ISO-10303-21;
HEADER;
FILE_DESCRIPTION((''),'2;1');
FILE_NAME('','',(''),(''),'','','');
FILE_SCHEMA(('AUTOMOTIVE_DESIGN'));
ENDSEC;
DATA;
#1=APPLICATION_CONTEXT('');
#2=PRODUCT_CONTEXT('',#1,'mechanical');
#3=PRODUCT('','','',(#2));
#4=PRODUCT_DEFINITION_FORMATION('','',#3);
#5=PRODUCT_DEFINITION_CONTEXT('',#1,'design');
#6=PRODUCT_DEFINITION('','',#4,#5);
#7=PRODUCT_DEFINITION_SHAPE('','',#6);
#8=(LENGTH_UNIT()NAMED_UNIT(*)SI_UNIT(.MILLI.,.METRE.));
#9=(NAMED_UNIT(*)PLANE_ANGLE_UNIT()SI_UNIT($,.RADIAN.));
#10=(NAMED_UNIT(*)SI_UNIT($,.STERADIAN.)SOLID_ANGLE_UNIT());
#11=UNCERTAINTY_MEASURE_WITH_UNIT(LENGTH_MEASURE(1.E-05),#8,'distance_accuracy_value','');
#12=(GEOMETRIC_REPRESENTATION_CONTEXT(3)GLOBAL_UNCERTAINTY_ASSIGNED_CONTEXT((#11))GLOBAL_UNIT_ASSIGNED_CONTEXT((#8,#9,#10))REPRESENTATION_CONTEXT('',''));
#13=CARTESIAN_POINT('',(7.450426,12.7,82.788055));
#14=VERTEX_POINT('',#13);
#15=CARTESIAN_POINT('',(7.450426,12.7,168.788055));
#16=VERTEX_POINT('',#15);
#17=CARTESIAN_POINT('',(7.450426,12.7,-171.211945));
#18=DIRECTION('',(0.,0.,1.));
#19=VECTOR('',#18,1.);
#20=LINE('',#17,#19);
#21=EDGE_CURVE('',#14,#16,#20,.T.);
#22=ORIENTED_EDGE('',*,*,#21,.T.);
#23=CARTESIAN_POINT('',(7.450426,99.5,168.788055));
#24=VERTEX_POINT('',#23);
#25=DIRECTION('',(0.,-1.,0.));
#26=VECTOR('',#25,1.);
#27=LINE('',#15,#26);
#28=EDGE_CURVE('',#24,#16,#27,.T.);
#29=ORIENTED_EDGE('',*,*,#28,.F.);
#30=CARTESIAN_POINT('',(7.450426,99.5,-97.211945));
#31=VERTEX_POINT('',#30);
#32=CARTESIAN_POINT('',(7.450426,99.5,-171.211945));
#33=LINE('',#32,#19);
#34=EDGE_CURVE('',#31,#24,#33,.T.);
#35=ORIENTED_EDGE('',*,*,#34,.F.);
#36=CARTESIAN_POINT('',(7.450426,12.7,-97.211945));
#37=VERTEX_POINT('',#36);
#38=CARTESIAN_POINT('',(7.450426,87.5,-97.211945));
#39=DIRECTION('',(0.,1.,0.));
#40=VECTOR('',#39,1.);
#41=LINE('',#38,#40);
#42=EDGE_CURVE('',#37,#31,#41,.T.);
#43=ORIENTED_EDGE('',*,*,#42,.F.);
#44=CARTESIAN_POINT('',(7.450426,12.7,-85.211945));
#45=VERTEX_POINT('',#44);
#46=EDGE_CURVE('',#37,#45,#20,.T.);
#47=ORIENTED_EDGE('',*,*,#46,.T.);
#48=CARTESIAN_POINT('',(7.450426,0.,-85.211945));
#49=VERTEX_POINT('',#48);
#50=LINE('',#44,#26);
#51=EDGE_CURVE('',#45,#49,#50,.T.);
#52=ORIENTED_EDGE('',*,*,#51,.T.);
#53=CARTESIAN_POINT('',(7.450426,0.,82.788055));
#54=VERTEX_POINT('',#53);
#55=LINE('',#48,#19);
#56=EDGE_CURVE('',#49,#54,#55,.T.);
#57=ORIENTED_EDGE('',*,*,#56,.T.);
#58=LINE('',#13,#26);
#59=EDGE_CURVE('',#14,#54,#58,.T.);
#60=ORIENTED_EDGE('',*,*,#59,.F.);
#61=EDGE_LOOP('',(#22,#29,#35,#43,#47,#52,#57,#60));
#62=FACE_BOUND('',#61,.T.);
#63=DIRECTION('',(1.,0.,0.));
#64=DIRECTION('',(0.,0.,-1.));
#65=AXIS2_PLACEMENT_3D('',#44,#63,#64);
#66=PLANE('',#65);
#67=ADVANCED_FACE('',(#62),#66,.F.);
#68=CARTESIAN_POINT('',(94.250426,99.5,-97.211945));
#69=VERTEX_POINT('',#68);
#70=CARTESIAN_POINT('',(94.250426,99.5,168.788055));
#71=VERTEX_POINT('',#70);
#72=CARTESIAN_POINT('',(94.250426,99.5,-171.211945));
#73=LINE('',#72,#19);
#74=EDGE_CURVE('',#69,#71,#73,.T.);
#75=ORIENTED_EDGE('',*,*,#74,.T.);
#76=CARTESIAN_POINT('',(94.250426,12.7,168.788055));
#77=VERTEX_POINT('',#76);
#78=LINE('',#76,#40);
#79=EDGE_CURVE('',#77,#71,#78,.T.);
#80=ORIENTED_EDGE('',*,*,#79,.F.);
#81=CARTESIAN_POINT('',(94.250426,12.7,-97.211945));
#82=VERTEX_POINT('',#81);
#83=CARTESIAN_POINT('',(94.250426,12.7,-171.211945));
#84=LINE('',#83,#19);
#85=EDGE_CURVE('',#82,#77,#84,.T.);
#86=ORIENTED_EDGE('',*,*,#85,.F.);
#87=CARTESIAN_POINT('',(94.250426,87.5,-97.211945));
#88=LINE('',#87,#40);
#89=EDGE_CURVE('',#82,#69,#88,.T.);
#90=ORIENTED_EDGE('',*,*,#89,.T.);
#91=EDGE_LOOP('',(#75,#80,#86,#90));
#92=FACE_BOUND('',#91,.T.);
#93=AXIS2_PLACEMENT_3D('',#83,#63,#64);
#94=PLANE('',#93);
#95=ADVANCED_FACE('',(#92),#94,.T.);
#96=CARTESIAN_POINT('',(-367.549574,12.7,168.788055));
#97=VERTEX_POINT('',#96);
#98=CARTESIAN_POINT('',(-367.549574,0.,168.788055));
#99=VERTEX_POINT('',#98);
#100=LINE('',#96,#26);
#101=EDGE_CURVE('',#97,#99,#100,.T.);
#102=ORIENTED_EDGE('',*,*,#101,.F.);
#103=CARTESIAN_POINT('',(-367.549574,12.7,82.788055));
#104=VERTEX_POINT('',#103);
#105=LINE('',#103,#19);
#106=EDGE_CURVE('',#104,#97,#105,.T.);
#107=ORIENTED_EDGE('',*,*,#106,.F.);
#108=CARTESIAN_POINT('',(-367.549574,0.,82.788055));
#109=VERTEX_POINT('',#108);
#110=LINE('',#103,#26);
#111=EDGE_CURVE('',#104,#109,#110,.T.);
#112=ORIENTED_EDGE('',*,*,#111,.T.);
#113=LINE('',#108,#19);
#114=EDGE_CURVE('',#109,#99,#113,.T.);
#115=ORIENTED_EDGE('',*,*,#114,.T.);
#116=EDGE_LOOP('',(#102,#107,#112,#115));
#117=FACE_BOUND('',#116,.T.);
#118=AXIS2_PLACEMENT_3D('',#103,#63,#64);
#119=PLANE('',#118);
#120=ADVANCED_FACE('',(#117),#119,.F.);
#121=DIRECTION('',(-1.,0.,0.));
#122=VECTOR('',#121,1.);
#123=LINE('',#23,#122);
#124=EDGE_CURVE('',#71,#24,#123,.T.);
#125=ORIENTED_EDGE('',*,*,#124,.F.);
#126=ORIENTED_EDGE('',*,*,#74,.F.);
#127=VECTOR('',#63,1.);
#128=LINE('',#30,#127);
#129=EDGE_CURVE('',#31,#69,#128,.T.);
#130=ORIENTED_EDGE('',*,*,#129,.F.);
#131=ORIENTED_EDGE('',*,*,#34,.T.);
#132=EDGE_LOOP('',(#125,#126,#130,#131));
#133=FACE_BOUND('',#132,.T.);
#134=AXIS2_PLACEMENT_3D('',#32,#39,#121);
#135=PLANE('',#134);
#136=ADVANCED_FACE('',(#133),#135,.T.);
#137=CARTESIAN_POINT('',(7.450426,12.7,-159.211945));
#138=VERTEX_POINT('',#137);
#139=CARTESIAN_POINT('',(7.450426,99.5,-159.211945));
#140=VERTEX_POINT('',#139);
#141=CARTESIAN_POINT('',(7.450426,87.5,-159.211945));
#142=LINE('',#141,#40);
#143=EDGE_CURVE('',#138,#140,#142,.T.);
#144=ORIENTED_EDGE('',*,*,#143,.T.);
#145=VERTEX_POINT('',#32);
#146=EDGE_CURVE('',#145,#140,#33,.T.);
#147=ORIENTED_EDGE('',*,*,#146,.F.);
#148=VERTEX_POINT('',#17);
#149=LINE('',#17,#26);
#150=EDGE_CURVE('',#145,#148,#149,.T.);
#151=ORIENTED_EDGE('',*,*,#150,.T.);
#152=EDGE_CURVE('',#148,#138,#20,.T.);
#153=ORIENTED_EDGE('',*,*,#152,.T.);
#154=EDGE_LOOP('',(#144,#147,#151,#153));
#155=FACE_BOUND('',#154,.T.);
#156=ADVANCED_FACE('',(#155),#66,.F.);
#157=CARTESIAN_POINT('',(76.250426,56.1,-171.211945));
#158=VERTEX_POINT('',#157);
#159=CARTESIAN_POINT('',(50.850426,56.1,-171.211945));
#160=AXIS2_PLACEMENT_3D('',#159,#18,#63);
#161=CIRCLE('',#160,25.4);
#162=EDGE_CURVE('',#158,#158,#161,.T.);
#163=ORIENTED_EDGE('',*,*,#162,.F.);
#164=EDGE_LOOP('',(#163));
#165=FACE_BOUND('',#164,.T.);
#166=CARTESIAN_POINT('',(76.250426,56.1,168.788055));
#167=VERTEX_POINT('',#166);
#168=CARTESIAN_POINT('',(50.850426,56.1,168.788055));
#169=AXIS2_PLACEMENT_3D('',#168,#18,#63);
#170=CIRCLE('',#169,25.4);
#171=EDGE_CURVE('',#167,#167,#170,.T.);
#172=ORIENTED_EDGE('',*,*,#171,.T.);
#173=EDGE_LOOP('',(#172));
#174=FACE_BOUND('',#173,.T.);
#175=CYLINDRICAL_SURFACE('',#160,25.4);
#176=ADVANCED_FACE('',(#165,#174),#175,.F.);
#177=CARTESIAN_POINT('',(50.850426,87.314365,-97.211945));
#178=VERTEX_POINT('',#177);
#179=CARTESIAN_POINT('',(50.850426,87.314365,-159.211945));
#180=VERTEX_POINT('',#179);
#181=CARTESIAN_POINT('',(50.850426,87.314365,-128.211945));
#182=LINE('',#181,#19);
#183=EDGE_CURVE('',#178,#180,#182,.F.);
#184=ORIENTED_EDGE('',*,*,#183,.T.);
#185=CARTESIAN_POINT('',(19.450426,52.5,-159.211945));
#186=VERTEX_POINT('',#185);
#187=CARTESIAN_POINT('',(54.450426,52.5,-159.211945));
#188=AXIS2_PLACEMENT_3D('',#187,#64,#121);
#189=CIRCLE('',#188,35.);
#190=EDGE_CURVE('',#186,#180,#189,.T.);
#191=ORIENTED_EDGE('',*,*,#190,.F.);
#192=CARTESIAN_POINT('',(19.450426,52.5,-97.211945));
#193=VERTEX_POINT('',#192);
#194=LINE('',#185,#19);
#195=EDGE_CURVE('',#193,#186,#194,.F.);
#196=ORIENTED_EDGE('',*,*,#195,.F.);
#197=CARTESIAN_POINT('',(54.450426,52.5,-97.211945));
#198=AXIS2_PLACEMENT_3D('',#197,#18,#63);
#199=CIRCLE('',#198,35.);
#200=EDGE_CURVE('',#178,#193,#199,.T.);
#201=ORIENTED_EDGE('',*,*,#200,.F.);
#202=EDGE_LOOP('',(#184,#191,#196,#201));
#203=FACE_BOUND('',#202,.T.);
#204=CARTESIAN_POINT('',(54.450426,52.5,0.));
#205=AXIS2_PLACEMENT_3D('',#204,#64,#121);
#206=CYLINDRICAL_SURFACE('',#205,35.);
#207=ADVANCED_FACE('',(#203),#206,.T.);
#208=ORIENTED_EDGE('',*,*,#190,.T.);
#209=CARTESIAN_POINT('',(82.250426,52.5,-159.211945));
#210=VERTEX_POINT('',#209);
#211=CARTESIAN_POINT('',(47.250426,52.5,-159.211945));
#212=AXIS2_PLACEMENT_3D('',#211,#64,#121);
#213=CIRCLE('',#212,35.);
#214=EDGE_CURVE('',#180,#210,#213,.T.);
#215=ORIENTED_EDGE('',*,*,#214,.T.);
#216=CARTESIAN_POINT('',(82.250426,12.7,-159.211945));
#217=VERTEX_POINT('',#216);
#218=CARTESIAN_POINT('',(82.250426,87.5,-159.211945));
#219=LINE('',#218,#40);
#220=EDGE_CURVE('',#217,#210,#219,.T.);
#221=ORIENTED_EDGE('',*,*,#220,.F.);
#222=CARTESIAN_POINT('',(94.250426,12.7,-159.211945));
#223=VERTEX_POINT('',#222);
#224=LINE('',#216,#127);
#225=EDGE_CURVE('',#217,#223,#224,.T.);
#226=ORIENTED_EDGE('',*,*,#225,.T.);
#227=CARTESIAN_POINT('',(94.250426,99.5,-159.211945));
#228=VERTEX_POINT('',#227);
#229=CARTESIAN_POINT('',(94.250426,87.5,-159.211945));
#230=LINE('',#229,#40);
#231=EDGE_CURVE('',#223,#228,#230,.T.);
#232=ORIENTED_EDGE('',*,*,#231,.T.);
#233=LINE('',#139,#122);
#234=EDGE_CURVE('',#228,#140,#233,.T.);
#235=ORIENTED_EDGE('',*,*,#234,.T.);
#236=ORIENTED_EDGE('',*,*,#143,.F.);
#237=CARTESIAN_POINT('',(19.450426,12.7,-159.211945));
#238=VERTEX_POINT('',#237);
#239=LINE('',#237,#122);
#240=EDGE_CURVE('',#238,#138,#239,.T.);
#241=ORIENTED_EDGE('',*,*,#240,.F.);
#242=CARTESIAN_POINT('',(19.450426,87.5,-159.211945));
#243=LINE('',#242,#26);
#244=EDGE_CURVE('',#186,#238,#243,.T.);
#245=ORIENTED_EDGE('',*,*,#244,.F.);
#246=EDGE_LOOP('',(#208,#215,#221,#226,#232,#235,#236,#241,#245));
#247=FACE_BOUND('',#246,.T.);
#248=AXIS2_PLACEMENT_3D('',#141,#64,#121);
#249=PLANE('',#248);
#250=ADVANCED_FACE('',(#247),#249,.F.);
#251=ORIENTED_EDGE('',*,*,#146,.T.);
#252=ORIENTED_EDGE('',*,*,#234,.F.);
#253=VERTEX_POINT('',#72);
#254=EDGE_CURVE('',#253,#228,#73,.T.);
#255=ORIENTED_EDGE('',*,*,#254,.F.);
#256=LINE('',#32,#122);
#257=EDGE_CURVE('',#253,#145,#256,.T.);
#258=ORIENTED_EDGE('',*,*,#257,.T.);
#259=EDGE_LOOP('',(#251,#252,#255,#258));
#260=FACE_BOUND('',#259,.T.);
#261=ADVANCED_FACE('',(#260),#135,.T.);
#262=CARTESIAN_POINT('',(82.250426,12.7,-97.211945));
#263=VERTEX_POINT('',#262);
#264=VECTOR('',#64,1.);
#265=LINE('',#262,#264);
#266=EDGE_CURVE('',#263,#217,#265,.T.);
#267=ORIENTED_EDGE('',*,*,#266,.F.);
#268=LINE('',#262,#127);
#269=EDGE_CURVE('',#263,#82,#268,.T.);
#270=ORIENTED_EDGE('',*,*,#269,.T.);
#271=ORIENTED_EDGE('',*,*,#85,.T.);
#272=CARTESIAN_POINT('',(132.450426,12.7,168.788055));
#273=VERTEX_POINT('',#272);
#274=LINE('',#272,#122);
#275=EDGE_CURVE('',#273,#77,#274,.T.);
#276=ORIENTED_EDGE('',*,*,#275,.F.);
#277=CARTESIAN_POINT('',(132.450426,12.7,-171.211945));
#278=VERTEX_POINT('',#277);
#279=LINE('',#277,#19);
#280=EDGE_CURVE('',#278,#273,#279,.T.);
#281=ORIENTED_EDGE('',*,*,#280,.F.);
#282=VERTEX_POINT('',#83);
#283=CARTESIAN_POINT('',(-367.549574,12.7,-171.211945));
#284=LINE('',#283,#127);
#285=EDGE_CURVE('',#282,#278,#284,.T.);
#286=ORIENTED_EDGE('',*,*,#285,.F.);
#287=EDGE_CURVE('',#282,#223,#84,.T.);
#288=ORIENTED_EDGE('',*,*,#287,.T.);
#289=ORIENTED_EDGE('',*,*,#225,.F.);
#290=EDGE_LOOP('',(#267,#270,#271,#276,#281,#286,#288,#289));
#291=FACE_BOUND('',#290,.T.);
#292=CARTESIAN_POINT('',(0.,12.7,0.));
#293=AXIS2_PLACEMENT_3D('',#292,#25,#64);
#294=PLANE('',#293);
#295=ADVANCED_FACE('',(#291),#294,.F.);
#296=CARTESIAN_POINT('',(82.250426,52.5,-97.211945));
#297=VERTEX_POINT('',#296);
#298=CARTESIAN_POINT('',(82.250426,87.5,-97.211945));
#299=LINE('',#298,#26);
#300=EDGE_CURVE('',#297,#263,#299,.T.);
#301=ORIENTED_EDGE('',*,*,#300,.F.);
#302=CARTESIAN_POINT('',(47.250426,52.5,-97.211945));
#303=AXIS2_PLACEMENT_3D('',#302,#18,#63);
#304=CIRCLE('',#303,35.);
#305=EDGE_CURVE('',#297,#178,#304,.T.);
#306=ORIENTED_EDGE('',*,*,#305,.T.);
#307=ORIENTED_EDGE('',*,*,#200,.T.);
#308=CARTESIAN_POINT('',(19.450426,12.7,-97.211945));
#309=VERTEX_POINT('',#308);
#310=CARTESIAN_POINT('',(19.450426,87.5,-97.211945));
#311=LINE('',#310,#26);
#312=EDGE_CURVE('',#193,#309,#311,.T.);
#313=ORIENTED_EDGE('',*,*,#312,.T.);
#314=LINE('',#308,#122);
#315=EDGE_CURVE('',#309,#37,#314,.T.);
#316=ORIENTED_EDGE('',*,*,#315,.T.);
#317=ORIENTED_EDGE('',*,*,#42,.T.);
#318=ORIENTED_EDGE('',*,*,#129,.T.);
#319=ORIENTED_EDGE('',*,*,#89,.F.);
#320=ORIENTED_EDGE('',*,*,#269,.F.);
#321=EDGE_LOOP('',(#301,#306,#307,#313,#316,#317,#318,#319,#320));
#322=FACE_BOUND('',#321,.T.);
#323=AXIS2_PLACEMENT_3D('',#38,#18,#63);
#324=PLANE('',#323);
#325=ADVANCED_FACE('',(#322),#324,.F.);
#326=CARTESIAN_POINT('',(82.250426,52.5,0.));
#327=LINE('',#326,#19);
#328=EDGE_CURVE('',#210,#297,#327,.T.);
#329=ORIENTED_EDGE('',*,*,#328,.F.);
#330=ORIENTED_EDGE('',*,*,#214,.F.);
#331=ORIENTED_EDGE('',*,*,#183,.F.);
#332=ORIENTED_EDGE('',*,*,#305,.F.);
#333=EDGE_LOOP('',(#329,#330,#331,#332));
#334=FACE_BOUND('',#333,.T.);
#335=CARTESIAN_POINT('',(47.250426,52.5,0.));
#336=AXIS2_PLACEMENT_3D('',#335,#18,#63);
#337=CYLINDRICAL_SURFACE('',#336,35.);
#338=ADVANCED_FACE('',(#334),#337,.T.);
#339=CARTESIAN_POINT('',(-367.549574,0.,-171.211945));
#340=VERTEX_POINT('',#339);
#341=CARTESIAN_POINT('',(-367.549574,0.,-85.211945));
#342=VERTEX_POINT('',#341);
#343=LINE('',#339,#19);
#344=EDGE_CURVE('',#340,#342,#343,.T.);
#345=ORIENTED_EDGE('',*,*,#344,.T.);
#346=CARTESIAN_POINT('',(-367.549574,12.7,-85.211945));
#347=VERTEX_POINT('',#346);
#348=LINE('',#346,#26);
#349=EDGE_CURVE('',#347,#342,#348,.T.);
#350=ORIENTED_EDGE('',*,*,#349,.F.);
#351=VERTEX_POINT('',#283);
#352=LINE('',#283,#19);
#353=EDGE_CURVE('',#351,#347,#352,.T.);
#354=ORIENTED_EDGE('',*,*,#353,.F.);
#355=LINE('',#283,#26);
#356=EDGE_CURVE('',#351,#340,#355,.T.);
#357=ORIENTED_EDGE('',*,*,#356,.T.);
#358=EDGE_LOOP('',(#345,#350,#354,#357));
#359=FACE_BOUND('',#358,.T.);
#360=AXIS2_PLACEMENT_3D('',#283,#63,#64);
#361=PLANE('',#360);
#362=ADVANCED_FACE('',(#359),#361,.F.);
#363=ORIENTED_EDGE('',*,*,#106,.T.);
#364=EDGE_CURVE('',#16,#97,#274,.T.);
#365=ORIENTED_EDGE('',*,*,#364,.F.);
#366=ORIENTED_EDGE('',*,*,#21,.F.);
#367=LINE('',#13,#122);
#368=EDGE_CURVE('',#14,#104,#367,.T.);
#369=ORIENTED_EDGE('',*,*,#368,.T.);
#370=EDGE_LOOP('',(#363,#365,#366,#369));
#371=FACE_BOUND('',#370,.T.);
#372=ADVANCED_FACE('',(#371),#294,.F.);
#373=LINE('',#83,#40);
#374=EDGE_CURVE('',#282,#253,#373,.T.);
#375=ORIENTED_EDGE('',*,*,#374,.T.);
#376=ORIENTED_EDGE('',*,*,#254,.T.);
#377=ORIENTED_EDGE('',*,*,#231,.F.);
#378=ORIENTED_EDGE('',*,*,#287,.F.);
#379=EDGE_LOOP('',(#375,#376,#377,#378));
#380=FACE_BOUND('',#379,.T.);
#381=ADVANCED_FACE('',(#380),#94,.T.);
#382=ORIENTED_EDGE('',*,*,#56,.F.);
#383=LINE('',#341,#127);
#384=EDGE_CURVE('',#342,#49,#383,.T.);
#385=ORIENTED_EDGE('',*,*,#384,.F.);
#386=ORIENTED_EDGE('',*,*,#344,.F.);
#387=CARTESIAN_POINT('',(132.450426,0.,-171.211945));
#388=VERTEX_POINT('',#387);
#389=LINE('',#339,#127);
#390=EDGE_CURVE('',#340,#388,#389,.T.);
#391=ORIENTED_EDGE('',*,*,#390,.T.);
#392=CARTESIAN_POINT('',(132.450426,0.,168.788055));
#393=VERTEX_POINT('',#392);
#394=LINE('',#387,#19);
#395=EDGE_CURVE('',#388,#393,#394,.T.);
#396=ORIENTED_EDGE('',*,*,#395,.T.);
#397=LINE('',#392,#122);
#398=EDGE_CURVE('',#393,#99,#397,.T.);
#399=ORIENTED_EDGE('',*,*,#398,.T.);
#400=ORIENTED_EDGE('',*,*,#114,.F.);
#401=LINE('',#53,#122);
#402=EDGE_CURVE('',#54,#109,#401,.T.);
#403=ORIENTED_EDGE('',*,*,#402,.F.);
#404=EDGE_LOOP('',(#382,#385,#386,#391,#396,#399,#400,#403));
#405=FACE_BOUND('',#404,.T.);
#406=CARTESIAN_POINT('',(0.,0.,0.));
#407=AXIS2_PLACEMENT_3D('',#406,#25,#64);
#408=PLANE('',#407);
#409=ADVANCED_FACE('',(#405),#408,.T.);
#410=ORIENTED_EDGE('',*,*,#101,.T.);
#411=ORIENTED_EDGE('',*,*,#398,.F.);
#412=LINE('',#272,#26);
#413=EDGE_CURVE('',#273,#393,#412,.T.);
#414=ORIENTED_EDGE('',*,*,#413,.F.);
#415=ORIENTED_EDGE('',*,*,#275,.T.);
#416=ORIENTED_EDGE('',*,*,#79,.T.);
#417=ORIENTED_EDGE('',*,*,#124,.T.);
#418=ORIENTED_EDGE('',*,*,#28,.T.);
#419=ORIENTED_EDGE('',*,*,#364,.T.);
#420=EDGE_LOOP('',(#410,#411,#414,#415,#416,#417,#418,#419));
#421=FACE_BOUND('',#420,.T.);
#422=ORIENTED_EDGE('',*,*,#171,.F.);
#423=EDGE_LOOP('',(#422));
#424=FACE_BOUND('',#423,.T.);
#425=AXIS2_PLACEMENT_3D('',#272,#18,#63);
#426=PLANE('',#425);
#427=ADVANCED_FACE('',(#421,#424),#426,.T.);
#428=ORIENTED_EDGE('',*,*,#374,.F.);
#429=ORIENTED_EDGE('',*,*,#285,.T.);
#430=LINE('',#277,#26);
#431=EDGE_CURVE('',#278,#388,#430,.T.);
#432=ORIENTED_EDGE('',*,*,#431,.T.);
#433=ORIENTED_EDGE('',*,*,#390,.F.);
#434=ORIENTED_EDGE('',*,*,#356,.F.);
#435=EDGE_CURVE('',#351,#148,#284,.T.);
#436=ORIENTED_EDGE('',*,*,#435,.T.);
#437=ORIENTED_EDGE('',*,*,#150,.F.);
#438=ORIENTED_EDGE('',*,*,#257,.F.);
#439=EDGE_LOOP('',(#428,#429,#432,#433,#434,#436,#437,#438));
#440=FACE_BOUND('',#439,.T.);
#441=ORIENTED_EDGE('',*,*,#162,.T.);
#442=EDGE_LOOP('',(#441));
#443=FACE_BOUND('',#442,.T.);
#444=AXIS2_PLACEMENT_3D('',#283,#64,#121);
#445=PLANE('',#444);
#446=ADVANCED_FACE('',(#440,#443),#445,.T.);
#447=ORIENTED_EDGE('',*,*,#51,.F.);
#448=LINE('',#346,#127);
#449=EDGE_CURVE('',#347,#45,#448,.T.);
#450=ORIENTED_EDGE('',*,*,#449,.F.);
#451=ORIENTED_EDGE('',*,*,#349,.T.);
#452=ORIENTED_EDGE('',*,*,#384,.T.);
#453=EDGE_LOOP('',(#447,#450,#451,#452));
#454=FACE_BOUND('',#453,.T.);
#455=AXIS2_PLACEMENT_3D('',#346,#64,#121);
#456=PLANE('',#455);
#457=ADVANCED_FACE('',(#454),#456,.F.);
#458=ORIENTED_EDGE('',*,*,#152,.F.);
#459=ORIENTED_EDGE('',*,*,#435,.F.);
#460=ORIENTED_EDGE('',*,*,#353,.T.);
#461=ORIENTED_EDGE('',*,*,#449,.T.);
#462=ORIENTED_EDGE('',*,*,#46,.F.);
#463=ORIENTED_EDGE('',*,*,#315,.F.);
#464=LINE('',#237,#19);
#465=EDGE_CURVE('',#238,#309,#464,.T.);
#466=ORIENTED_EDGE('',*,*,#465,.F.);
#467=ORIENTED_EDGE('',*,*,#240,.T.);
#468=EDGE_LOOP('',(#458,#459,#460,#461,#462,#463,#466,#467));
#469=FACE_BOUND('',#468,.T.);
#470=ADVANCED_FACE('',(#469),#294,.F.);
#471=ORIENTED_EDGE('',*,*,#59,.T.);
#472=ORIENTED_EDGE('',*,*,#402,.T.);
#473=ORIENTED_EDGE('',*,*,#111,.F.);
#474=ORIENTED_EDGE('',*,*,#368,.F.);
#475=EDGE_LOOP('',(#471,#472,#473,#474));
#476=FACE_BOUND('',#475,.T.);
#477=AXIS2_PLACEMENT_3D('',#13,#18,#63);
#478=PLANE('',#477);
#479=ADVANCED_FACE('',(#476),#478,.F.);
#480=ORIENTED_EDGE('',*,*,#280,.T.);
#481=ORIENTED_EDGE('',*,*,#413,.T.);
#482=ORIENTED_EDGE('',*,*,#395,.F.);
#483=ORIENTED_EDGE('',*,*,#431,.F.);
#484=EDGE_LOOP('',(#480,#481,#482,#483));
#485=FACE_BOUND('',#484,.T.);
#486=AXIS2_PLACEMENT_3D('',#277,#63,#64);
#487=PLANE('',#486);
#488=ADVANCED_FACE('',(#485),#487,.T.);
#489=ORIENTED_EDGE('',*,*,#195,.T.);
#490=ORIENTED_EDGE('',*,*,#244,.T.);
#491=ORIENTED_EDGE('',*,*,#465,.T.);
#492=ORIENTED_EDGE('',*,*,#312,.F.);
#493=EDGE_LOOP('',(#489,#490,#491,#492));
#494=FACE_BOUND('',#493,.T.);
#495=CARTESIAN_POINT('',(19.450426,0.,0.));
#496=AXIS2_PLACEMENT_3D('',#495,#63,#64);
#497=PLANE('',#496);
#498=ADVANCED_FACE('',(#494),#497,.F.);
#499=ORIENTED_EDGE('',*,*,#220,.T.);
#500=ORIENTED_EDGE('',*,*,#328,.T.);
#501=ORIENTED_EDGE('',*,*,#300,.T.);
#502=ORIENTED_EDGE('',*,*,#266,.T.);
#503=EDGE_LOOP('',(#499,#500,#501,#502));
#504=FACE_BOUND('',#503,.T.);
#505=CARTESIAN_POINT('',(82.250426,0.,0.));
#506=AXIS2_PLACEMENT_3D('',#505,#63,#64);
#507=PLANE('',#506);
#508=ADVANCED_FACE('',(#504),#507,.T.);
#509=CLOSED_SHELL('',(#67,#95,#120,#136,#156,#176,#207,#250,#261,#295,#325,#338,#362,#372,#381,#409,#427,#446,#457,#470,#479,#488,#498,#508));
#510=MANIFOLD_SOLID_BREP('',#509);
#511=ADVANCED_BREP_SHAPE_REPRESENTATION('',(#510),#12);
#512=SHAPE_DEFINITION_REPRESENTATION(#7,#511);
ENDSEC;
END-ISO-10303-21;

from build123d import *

# Parameters (mm, degrees)
BOSS_EXTRUDE1_DEPTH = 12.7
SKETCH4_W           = 86.8
SKETCH4_H           = 86.8
SKETCH4_R           = 25.4
BOSS_EXTRUDE3_DEPTH = 340
SKETCH6_W           = 86.8
SKETCH6_H           = 62
CUT_EXTRUDE3_DEPTH  = 12
SKETCH7_W           = 62
SKETCH7_H           = 74.8
CUT_EXTRUDE4_DEPTH  = 12
SKETCH8_W           = 62
SKETCH8_H           = 74.8
CUT_EXTRUDE5_DEPTH  = 12
FILLET2_R           = 35


with BuildPart() as part:
    # Sketch1 → Boss-Extrude1 (new body)
    with BuildSketch(Plane(origin=(0, 0, 0), x_dir=(1, 0, 0), z_dir=(0, 1, 0))):
        Polygon((-367.549574024, 171.211944752), (132.450425976, 171.211944752), (132.450425976, -168.788055248), (-367.549574024, -168.788055248), (-367.549574024, -82.788055248), (7.450425976, -82.788055248), (7.450425976, 85.211944752), (-367.549574024, 85.211944752), align=None)
    extrude(amount=BOSS_EXTRUDE1_DEPTH)

    # Sketch4 → Boss-Extrude3 (add)
    with BuildSketch(Plane.XY.offset(168.788055248)):
        with Locations((50.850425976, 56.1)):
            Rectangle(SKETCH4_W, SKETCH4_H)
        with Locations((50.850425976, 56.1)):
            Circle(SKETCH4_R, mode=Mode.SUBTRACT)
    extrude(amount=-BOSS_EXTRUDE3_DEPTH)

    # Sketch6 → Cut-Extrude3 (cut)
    with BuildSketch(Plane(origin=(0, 99.5, 0), x_dir=(1, 0, 0), z_dir=(0, 1, 0))):
        with Locations((50.850425976, 128.211944752)):
            Rectangle(SKETCH6_W, SKETCH6_H)
    extrude(amount=-CUT_EXTRUDE3_DEPTH, mode=Mode.SUBTRACT)

    # Sketch7 → Cut-Extrude4 (cut)
    with BuildSketch(Plane.ZY.offset(-7.450425976)):
        with Locations((-128.211944752, 50.1)):
            Rectangle(SKETCH7_W, SKETCH7_H)
    extrude(amount=-CUT_EXTRUDE4_DEPTH, mode=Mode.SUBTRACT)

    # Sketch8 → Cut-Extrude5 (cut)
    with BuildSketch(Plane(origin=(94.250425976, 0, 0), x_dir=(0, 0, -1), z_dir=(1, 0, 0))):
        with Locations((128.211944752, 50.1)):
            Rectangle(SKETCH8_W, SKETCH8_H)
    extrude(amount=-CUT_EXTRUDE5_DEPTH, mode=Mode.SUBTRACT)

    # Fillet2
    # the kernel refuses this fillet: 35 mm, written as the material it takes off along each edge
    with BuildSketch(Plane(origin=(82.250425976, 87.5, -97.211944752), x_dir=(-1, 0, 0), z_dir=(0, 0, -1))) as fillet2_piece_1:
        with BuildLine():
            CenterArc((FILLET2_R, -FILLET2_R), FILLET2_R, 90, 90)
            Line((0, -FILLET2_R), (0, 0))
            Line((0, 0), (FILLET2_R, 0))
        make_face()
    extrude(amount=62, mode=Mode.SUBTRACT)
    with BuildSketch(Plane(origin=(19.450425976, 87.5, -159.211944752), x_dir=(0, -1, 0), z_dir=(0, 0, 1))) as fillet2_piece_2:
        with BuildLine():
            CenterArc((FILLET2_R, FILLET2_R), FILLET2_R, 180, 90)
            Line((0, FILLET2_R), (0, 0))
            Line((0, 0), (FILLET2_R, 0))
        make_face()
    extrude(amount=62, mode=Mode.SUBTRACT)


solid = part.part
